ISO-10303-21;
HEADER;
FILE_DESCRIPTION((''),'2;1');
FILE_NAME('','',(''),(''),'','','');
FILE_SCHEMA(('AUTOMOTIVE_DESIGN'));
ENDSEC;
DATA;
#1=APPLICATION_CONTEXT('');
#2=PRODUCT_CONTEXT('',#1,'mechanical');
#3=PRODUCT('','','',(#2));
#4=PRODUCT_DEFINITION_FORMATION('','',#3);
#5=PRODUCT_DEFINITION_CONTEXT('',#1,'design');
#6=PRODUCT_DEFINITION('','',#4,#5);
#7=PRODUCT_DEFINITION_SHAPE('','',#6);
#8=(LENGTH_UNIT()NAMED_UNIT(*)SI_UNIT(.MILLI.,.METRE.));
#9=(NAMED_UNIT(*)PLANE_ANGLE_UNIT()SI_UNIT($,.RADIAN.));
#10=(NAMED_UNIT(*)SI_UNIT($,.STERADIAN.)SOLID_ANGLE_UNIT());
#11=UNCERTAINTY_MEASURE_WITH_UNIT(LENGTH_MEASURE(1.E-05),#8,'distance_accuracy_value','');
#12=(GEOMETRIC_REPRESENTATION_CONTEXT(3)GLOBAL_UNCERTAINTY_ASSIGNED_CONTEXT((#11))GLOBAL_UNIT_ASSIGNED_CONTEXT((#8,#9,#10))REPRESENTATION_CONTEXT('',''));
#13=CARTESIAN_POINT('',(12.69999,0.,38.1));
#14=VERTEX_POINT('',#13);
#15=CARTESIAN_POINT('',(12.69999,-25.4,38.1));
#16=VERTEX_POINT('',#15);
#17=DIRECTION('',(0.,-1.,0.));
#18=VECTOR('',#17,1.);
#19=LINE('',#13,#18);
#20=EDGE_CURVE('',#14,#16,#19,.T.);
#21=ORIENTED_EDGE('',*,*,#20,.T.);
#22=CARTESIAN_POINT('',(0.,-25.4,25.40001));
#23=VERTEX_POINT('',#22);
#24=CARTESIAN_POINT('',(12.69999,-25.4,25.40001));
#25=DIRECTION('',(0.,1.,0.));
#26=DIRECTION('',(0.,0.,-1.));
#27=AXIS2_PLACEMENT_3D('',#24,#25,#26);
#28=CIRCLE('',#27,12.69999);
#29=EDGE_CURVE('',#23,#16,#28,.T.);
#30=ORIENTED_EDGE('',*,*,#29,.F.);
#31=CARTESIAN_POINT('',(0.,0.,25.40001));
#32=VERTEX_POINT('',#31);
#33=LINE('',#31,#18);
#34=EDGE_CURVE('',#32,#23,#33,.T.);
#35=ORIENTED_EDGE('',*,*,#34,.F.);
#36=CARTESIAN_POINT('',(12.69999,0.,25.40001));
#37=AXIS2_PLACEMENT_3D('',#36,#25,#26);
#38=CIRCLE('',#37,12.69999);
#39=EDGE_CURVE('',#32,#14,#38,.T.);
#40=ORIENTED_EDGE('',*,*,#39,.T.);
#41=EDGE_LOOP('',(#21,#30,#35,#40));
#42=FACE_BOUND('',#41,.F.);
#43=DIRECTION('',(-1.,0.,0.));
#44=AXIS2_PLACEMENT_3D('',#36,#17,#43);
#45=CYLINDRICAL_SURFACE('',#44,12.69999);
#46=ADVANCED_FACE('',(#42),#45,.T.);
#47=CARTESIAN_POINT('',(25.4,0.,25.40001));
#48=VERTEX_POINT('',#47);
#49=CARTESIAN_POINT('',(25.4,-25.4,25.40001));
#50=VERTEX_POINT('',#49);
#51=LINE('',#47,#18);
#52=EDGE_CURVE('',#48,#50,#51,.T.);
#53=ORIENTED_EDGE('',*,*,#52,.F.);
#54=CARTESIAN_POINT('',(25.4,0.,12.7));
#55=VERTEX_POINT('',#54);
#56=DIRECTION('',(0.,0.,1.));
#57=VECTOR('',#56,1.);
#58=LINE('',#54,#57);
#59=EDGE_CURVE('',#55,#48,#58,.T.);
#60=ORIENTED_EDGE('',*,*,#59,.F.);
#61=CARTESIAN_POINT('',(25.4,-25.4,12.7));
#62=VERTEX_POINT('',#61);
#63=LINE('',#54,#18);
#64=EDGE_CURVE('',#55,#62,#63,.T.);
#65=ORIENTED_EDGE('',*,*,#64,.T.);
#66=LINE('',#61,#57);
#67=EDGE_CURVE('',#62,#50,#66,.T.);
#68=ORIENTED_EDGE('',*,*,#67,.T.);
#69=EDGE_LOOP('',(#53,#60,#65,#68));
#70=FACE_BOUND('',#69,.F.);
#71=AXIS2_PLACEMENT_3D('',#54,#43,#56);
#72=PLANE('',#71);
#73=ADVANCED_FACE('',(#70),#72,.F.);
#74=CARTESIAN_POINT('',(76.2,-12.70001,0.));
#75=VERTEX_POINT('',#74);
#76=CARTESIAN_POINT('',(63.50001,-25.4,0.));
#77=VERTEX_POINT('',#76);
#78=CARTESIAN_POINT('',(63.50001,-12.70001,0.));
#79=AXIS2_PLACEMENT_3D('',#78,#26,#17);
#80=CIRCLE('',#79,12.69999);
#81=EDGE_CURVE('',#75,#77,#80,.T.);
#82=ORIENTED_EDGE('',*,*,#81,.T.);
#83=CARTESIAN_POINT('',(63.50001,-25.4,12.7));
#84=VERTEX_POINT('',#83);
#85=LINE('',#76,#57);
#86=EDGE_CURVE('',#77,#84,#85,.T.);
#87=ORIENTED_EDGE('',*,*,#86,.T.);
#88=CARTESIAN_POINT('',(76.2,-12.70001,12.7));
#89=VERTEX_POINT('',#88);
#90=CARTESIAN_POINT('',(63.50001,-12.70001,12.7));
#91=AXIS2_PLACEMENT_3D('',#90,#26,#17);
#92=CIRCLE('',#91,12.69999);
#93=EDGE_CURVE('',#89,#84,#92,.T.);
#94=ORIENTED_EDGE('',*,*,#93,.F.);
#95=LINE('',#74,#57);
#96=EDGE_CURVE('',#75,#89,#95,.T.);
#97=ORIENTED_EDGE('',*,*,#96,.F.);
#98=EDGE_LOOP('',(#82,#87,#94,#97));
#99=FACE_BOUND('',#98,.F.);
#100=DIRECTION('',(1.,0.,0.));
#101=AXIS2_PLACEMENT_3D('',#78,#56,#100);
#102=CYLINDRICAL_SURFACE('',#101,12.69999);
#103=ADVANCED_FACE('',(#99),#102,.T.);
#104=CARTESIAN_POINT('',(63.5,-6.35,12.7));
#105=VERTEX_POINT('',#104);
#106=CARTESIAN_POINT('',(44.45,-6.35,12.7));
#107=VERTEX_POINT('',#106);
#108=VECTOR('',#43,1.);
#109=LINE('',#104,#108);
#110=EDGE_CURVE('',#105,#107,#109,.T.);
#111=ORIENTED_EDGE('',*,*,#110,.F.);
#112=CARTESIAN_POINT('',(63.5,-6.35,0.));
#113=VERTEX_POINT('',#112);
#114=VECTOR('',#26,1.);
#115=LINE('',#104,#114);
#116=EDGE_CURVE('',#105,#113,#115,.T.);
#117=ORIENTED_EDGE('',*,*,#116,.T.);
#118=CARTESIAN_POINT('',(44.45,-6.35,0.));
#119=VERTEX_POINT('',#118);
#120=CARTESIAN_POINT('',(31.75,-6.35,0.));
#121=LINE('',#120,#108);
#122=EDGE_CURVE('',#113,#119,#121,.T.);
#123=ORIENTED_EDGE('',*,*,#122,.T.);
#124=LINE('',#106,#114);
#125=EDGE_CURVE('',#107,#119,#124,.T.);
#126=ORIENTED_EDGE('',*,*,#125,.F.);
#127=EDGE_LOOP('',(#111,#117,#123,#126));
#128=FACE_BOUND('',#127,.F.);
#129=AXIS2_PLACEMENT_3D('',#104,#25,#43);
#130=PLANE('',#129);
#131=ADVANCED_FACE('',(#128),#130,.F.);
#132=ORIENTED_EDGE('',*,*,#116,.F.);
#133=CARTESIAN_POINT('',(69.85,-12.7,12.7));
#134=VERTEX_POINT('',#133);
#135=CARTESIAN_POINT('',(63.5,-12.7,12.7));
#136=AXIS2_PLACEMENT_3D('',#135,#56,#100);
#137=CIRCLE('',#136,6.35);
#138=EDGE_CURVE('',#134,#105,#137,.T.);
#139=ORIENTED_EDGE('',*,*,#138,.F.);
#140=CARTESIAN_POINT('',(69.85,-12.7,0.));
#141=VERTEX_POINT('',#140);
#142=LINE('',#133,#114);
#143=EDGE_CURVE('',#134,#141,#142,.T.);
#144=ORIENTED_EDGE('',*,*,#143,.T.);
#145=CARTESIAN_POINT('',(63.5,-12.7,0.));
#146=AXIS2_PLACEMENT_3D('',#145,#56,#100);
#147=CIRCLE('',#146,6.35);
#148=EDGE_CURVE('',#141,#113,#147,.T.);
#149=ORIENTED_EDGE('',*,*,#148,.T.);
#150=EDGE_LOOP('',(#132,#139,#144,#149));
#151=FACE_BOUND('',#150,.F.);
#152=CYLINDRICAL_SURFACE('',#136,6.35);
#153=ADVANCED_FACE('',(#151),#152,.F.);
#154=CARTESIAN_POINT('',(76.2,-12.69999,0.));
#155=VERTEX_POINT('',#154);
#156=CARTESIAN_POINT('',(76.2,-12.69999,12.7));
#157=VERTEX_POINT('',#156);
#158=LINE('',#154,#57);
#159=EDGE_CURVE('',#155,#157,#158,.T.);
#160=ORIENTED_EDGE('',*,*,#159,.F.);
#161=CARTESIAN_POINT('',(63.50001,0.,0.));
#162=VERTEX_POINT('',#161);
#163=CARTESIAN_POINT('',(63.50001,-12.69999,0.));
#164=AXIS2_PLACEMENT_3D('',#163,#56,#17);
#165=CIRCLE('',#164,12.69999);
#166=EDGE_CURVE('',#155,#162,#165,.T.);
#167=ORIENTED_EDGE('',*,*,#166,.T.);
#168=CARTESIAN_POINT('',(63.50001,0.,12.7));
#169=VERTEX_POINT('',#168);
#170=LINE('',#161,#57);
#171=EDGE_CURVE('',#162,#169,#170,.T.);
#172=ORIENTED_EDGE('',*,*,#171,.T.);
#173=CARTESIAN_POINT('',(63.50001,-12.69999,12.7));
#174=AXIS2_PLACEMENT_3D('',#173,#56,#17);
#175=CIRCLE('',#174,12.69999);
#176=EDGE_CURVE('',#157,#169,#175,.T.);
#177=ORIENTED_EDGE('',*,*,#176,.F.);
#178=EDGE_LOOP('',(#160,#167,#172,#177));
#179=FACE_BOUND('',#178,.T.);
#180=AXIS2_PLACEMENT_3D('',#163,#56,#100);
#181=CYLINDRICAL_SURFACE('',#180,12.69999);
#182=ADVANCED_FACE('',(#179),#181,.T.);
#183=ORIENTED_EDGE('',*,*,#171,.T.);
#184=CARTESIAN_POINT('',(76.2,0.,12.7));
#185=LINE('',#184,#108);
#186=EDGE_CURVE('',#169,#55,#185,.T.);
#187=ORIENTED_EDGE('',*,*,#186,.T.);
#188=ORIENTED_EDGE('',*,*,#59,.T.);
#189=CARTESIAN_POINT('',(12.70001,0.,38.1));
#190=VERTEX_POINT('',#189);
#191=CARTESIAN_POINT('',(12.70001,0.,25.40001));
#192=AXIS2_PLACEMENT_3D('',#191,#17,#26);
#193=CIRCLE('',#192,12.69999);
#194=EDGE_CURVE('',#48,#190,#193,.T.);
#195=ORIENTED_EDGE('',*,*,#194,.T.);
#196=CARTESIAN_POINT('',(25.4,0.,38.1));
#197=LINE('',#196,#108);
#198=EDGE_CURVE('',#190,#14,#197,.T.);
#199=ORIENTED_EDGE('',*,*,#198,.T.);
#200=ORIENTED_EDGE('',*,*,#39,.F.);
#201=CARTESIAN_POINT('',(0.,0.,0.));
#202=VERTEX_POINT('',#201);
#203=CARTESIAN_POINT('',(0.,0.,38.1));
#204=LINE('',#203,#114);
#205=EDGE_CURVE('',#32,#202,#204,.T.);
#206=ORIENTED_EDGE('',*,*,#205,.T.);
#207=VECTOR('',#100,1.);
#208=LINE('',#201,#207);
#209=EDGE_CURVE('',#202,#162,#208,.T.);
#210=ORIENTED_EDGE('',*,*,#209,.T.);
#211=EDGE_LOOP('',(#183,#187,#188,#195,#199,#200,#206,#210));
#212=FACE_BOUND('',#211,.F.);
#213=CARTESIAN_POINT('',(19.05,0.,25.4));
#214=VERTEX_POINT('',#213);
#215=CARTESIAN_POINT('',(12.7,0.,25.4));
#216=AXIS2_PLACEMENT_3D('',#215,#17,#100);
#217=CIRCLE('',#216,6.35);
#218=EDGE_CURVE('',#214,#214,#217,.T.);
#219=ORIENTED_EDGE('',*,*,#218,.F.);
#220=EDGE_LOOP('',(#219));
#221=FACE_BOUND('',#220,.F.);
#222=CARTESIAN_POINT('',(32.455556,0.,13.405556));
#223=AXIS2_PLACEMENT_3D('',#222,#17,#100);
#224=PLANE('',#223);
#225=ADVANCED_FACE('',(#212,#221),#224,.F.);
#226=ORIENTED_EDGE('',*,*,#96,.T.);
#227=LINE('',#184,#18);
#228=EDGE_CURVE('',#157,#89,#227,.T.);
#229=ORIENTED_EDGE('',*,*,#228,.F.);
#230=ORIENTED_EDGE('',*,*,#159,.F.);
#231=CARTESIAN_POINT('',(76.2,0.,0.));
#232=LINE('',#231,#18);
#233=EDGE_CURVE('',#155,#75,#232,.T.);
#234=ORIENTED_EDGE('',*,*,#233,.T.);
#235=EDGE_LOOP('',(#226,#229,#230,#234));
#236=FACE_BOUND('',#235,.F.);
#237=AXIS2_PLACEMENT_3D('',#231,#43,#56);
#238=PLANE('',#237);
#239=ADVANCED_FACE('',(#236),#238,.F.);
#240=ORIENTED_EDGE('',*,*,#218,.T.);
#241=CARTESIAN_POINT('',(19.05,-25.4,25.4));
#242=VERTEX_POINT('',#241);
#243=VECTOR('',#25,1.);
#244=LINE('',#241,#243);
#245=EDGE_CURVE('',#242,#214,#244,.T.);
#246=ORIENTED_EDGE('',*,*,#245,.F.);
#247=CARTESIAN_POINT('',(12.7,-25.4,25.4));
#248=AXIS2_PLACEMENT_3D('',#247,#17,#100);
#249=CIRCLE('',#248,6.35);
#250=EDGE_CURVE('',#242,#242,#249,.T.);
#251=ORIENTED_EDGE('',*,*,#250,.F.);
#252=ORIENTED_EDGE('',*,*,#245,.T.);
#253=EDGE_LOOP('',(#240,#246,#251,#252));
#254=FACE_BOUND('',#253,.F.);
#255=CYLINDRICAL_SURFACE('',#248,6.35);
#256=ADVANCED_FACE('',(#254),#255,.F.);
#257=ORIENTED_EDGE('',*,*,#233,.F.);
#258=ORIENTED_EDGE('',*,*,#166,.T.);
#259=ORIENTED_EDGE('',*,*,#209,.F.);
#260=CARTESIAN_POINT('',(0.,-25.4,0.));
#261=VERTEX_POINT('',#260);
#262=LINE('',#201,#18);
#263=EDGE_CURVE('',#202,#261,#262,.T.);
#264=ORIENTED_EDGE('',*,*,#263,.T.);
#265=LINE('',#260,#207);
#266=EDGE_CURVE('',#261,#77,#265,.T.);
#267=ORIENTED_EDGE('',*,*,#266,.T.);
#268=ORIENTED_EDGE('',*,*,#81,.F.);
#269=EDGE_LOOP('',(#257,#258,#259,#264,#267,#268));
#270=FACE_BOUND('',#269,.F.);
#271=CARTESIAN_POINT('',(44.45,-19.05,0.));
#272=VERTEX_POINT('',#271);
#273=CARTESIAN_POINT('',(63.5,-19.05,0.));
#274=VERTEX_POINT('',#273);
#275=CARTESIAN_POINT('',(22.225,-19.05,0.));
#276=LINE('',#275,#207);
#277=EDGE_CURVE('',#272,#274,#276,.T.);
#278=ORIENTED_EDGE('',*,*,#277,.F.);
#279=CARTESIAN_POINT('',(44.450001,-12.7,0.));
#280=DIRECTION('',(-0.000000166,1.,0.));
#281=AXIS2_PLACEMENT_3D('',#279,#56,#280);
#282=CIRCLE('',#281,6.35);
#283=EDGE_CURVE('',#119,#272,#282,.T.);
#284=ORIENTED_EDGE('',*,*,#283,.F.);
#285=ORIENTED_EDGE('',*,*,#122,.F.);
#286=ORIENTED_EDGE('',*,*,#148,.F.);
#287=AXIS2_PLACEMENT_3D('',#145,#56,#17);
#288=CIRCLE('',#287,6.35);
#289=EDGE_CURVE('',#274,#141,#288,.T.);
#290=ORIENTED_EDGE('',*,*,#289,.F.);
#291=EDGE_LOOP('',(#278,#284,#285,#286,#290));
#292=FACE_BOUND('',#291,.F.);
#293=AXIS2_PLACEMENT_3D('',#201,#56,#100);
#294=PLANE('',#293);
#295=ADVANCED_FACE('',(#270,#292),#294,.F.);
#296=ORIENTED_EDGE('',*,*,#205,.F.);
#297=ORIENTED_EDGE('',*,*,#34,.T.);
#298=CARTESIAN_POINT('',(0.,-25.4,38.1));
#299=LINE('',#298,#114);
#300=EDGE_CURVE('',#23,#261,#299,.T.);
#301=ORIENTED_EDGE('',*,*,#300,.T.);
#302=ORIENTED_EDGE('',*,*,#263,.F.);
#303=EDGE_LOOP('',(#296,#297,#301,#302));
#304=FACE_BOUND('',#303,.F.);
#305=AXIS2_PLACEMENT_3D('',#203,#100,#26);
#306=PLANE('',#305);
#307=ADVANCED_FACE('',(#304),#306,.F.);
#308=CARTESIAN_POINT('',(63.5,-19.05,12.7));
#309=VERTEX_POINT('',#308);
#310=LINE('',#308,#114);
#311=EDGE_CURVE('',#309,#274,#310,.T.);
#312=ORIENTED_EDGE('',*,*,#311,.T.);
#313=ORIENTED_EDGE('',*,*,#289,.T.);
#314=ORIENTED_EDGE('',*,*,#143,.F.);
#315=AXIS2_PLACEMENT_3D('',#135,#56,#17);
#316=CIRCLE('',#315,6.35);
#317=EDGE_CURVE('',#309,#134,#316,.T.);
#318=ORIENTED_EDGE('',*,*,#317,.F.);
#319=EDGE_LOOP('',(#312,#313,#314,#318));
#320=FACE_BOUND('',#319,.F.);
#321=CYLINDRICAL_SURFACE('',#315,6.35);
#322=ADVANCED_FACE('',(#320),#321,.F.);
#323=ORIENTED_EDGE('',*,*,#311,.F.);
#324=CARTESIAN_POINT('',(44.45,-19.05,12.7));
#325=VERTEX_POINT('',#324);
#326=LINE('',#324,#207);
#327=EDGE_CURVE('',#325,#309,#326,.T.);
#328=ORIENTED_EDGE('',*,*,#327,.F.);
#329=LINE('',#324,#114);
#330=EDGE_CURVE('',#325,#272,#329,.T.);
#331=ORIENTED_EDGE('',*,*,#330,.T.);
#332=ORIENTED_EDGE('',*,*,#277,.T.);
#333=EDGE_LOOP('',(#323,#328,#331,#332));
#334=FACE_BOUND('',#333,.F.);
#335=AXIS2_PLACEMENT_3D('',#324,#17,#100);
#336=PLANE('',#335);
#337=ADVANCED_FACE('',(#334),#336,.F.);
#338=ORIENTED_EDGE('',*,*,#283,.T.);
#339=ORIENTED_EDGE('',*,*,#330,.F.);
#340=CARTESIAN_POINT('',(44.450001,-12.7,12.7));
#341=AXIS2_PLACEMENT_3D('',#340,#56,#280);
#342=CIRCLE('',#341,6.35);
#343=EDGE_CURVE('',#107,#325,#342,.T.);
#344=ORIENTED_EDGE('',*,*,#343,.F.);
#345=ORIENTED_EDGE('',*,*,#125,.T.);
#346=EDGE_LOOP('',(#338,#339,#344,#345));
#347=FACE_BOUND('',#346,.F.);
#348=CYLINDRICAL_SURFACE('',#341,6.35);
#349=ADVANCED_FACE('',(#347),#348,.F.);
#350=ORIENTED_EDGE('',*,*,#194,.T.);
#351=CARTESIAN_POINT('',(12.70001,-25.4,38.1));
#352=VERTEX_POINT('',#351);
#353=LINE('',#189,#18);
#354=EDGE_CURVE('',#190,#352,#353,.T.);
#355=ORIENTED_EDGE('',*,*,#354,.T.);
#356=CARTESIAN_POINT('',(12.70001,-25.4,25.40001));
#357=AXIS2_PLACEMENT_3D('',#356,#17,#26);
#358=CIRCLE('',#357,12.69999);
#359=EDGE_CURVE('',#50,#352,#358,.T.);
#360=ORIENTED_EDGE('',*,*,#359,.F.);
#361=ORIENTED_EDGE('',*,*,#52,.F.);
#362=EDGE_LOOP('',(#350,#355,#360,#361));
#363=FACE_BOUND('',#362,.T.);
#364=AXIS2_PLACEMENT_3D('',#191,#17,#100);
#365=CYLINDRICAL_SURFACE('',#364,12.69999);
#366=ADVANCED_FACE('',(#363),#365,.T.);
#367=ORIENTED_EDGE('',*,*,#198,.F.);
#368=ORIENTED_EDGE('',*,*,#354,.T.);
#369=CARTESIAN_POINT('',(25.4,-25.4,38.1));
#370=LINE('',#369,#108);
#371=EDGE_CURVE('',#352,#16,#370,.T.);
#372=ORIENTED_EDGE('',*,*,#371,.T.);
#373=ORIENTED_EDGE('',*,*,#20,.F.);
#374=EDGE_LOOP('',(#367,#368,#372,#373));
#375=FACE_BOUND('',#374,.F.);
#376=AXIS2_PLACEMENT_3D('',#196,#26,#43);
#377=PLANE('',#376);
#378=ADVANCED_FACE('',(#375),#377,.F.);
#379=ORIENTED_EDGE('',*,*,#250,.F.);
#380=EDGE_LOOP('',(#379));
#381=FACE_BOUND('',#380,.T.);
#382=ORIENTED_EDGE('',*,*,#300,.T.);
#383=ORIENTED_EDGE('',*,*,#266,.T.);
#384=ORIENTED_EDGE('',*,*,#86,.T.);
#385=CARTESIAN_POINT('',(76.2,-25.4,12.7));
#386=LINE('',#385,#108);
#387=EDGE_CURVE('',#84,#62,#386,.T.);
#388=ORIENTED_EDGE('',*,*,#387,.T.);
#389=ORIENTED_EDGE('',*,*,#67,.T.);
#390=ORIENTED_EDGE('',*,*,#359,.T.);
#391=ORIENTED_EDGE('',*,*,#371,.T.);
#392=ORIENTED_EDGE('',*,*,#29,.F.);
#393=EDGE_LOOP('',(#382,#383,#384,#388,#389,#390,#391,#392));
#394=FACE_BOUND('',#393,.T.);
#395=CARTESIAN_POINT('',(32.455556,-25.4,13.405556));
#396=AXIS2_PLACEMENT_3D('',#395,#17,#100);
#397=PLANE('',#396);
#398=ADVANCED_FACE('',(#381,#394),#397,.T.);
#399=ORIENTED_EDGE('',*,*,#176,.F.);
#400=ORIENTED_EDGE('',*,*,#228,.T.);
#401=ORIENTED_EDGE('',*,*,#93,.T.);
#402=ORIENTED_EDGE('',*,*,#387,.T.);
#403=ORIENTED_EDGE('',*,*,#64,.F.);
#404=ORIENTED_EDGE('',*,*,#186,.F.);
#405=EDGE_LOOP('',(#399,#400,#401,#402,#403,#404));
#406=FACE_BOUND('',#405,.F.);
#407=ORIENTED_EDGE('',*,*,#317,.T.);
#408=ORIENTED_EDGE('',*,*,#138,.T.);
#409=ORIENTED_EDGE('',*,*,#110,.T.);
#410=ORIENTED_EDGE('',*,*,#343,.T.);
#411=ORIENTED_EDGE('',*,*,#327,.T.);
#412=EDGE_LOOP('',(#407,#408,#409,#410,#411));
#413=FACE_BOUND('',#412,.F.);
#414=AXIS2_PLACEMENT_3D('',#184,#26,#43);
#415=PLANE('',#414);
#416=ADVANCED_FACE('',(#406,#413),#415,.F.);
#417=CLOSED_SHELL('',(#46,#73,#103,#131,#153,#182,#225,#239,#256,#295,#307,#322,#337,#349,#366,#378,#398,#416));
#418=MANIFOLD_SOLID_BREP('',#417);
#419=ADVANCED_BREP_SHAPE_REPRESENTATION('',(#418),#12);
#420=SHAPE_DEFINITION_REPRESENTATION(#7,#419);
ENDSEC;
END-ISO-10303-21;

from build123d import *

# Parameters (mm, degrees)
F1_DEPTH = 25.4
F2_R     = 12.69999
F3_R     = 6.35
F4_DEPTH = 25.4
F6_DEPTH = 25.4


# Not quite as in the source:
# - a fillet or chamfer is up to 0.001 mm smaller than in the source, because OpenCascade refuses the exact size


with BuildPart() as f1:
    # F0 (on Front) → F1 (new body)
    with BuildSketch(Plane.XZ):
        Polygon((0, 38.1), (0, 0), (76.2, 0), (76.2, 12.7), (25.4, 12.7), (25.4, 38.1), align=None)
    extrude(amount=F1_DEPTH)

    # F2 (radius 12.7 in the source; OpenCascade refuses exactly that, so slightly less here)
    f2_edges = [f1.edges().sort_by_distance(p)[0] for p in [
        (25.4, -12.7, 38.1),
        (0, -12.7, 38.1),
        (76.2, -25.4, 6.35),
        (76.2, 0, 6.35),
    ]]
    fillet(f2_edges, radius=F2_R)

    # F3 (on face) → F4 (cut)
    with BuildSketch(Plane.XZ.offset(25.4)):
        with Locations((12.7, 25.4)):
            Circle(F3_R)
    extrude(amount=-F4_DEPTH, mode=Mode.SUBTRACT)

    # F5 (on face) → F6 (cut)
    with BuildSketch(Plane.XY.offset(12.7)):
        with BuildLine():
            ThreePointArc((44.45, -19.05), (48.9401287414, -17.1901284329), (50.8000010533, -12.7))
            ThreePointArc((50.8000010533, -12.7), (48.9401287414, -8.2098715671), (44.45, -6.35))
            ThreePointArc((44.45, -6.35), (38.1000010533, -12.7), (44.45, -19.05))
        make_face()
        with BuildLine():
            ThreePointArc((44.45, -6.35), (48.9401287414, -8.2098715671), (50.8000010533, -12.7))
            ThreePointArc((50.8000010533, -12.7), (48.9401287414, -17.1901284329), (44.45, -19.05))
            Line((44.45, -19.05), (63.5, -19.05))
            ThreePointArc((63.5, -19.05), (57.15, -12.7), (63.5, -6.35))
            Line((63.5, -6.35), (44.45, -6.35))
        make_face()
        with BuildLine():
            ThreePointArc((69.85, -12.7), (67.9901280605, -8.2098719395), (63.5, -6.35))
            ThreePointArc((63.5, -6.35), (57.15, -12.7), (63.5, -19.05))
            ThreePointArc((63.5, -19.05), (67.9901280605, -17.1901280605), (69.85, -12.7))
        make_face()
    extrude(amount=-F6_DEPTH, mode=Mode.SUBTRACT)


solid = f1.part
